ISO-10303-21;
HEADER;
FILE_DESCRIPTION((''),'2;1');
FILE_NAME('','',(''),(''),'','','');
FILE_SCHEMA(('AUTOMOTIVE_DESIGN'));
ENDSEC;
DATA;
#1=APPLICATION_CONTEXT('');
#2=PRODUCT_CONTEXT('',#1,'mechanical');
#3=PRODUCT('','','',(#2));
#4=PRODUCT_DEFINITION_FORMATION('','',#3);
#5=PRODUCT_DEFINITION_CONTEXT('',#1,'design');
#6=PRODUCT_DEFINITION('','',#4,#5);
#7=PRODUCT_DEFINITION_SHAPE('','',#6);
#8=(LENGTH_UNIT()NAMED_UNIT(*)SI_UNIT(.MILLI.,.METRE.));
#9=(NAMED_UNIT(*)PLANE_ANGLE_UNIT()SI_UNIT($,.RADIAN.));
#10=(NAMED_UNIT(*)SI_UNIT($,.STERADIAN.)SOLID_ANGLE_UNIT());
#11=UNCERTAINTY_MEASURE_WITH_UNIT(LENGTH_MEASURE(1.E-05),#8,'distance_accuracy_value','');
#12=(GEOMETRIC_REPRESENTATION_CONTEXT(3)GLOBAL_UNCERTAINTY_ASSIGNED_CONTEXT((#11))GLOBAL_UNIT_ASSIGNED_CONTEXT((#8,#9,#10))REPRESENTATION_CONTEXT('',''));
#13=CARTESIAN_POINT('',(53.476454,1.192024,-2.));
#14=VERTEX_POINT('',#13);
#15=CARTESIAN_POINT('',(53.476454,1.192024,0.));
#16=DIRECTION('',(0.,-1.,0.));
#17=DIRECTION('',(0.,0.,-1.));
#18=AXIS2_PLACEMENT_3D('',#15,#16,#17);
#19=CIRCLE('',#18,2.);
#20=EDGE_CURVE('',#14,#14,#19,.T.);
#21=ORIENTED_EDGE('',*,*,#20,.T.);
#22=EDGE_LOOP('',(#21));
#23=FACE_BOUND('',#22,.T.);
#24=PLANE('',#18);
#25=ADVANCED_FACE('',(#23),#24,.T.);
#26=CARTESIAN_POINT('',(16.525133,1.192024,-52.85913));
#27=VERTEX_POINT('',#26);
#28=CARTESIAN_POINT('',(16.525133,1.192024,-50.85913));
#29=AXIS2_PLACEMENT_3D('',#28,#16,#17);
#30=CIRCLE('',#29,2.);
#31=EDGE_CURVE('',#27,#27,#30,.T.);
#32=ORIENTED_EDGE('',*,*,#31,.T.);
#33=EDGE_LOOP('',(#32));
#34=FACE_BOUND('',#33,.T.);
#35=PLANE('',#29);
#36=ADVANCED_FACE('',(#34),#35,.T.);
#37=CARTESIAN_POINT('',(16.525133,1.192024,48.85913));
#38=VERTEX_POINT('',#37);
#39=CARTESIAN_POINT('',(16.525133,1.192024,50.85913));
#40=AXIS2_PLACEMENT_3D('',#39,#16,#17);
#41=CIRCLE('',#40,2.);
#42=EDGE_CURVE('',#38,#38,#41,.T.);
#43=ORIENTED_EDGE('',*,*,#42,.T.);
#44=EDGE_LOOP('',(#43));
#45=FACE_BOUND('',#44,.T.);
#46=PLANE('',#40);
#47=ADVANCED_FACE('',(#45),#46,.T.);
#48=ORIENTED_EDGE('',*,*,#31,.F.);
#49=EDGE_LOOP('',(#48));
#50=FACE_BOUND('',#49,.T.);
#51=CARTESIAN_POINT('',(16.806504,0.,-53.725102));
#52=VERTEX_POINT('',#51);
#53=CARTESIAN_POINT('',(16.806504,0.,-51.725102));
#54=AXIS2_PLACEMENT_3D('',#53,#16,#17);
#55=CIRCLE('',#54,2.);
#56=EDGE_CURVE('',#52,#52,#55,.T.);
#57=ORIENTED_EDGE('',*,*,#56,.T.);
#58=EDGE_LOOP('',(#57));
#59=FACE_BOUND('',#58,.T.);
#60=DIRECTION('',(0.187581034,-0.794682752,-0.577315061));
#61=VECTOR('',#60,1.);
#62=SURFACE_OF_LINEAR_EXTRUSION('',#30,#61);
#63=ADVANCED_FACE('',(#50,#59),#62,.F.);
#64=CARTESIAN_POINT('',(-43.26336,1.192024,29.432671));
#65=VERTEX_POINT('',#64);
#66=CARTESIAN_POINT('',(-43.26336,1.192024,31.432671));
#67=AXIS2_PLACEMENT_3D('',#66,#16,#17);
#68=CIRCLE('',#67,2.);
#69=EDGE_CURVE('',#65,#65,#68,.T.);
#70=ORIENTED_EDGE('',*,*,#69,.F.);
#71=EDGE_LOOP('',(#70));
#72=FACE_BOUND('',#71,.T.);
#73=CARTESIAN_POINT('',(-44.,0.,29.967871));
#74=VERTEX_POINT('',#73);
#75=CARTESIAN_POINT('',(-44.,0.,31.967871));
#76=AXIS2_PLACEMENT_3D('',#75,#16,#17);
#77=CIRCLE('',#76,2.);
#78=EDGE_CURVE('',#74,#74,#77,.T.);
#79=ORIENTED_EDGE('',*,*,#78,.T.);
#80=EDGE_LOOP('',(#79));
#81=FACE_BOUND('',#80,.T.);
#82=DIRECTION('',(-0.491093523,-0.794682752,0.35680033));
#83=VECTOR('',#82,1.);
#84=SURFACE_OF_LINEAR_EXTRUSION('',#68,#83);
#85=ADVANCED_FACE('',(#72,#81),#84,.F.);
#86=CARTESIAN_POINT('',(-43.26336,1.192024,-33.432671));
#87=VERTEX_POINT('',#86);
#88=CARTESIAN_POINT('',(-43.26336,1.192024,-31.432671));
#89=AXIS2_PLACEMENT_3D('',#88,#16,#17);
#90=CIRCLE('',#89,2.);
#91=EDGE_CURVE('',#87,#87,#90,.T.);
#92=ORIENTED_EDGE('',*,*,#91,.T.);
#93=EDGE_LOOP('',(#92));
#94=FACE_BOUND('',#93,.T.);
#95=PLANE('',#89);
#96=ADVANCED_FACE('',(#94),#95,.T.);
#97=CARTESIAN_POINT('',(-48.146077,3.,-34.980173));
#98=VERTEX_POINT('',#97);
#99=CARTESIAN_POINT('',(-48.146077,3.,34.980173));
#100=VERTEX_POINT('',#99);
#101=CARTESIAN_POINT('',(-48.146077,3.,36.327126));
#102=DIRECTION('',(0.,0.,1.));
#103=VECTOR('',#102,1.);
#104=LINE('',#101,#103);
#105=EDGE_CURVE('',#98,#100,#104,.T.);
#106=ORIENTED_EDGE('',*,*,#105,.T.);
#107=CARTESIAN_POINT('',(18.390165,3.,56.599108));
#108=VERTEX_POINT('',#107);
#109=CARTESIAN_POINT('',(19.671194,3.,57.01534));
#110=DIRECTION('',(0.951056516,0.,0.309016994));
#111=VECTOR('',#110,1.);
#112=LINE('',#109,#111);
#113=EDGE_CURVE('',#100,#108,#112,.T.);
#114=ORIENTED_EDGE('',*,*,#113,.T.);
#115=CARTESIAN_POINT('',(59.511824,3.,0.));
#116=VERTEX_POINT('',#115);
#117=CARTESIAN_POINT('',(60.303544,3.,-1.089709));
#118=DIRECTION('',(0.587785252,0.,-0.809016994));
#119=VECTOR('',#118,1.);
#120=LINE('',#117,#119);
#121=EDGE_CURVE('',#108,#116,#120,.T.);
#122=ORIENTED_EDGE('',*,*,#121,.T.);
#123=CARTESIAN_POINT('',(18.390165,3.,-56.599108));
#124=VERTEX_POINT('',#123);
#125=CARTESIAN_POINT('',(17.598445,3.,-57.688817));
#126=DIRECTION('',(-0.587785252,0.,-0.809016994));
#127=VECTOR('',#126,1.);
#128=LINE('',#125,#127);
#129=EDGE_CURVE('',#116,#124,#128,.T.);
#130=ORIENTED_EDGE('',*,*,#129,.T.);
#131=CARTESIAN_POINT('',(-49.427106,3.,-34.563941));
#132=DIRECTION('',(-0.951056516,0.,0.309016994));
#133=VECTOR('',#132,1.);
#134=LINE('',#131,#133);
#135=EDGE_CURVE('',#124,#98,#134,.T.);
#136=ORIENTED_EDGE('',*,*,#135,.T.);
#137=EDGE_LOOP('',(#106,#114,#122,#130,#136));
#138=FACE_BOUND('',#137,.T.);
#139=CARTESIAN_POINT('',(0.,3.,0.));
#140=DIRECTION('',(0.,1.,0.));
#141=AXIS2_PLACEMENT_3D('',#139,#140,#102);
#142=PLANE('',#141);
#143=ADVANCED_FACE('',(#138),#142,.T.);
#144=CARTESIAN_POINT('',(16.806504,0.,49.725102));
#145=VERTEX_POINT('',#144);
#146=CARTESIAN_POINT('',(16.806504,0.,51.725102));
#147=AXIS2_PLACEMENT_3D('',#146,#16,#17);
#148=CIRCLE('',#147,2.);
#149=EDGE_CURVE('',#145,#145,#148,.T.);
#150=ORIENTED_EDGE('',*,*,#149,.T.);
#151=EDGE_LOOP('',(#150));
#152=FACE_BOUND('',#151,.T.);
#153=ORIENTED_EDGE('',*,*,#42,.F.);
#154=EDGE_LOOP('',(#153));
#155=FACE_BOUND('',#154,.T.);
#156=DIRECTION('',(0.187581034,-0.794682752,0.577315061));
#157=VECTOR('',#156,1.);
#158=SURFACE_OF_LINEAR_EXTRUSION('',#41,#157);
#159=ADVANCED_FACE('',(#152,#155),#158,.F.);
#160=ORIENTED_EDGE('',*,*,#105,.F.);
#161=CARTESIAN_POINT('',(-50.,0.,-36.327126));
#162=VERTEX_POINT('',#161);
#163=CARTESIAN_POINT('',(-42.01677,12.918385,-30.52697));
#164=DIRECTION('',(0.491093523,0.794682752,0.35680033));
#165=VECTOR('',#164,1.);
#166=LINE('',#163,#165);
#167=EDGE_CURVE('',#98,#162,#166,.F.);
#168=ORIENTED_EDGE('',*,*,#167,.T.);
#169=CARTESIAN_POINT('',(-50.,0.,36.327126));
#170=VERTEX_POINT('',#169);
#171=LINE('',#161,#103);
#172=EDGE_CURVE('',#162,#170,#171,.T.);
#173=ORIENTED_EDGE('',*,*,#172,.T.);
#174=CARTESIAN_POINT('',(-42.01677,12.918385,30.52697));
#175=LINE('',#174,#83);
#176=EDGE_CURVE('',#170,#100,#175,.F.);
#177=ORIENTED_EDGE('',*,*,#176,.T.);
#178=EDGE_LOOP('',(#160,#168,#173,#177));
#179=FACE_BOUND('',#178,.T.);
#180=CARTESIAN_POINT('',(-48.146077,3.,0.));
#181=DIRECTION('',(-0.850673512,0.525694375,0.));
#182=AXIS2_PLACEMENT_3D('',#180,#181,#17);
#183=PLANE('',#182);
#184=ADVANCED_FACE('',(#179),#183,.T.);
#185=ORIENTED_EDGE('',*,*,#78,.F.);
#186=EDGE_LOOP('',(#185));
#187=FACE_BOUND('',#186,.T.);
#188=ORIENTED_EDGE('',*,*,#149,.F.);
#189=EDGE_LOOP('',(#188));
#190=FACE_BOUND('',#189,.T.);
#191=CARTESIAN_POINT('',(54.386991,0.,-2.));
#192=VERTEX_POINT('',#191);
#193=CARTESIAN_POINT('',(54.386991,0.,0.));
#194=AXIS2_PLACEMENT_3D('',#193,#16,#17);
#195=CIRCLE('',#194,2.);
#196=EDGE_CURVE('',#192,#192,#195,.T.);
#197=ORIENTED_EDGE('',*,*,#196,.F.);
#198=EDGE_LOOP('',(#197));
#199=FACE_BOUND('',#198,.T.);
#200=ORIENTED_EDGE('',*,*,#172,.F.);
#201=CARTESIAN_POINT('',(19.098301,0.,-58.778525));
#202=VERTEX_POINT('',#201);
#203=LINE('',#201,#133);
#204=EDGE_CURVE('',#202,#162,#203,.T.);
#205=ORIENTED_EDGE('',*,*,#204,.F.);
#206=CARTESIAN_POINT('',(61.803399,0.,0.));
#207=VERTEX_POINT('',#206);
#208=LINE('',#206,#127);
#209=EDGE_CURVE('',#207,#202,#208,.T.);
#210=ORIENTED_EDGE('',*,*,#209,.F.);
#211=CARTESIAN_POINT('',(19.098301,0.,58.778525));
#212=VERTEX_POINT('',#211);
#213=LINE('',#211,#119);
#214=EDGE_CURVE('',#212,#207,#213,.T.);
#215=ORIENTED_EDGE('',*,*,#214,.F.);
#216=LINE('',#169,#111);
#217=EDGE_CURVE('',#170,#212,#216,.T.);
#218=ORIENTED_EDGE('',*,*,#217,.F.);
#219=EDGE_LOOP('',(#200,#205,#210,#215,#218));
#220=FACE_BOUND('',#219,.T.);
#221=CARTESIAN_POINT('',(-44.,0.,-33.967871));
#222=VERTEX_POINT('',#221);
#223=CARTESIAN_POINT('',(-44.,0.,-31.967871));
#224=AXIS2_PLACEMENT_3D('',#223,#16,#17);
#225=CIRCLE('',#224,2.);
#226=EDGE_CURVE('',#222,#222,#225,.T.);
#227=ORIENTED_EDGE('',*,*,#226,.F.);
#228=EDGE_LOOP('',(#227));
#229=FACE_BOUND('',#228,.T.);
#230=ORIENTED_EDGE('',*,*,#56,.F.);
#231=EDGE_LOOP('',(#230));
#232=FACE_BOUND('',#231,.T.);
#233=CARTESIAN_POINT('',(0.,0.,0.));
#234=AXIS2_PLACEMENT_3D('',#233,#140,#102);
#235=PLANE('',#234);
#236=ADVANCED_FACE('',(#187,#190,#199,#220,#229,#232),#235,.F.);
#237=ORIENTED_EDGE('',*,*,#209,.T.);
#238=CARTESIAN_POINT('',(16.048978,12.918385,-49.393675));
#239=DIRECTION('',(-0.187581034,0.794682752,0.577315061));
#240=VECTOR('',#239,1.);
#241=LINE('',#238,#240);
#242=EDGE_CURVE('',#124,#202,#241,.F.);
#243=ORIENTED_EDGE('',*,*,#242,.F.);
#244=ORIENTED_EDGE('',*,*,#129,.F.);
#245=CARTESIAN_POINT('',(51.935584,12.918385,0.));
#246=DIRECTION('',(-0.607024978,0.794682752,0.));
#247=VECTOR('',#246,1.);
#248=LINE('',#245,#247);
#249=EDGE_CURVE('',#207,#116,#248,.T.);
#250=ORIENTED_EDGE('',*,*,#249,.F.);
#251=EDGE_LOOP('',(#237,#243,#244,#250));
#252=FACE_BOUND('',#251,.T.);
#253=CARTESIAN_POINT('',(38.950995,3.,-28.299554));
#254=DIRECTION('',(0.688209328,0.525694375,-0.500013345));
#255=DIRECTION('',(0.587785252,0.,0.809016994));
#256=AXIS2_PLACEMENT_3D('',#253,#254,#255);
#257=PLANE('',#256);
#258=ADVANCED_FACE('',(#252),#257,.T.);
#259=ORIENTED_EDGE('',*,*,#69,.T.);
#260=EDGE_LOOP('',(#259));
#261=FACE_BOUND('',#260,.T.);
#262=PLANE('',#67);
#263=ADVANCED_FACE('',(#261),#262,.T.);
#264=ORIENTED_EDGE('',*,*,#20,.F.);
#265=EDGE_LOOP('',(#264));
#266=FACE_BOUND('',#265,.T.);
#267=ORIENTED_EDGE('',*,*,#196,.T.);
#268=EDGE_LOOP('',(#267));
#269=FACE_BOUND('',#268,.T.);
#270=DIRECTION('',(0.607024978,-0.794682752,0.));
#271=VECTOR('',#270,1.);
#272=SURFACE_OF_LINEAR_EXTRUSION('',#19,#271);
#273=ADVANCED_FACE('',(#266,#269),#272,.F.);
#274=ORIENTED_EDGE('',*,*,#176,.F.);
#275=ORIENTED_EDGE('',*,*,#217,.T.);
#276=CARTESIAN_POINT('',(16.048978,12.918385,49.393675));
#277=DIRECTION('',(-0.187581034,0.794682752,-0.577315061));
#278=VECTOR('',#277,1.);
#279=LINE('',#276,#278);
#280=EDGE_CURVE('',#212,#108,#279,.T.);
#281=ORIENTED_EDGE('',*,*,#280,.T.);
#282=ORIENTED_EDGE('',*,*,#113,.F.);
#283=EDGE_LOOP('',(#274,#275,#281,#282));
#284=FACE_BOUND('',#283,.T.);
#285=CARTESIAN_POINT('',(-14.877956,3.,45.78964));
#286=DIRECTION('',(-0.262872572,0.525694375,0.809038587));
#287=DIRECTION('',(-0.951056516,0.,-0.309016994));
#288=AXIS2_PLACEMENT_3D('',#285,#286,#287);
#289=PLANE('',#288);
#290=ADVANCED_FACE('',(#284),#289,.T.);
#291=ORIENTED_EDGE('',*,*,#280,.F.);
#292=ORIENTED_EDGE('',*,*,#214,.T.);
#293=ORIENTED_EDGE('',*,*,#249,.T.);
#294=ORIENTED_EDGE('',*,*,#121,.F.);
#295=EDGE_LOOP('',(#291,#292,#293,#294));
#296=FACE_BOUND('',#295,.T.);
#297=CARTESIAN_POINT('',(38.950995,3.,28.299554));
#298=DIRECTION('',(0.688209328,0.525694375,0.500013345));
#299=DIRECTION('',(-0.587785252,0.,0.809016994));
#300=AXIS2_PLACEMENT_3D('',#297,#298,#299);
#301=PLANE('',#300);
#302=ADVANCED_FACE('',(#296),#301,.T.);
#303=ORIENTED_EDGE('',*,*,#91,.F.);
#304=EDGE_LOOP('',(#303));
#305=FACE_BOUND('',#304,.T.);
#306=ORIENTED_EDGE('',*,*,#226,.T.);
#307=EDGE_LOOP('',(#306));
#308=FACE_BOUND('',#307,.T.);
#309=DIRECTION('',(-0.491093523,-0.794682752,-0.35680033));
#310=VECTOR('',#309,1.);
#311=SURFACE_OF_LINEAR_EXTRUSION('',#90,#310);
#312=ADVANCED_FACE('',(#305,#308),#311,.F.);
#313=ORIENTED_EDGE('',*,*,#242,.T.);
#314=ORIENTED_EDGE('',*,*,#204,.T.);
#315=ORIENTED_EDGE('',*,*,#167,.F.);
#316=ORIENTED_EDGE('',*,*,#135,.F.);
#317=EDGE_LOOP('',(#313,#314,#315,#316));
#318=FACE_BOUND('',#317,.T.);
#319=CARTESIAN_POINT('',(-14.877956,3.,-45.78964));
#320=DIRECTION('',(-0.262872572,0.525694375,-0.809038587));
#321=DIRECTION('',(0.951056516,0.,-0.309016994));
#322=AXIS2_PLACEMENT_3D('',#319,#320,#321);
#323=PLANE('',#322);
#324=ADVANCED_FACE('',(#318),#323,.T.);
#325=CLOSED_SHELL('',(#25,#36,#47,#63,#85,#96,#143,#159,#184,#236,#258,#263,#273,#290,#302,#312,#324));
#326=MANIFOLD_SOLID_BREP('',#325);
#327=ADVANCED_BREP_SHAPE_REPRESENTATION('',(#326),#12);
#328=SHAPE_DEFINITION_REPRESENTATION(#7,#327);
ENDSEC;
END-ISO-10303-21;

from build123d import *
from OCP.BRepFilletAPI import BRepFilletAPI_MakeChamfer

# Parameters (mm, degrees)
BOSS_EXTRUDE1_DEPTH = 3
CHAMFER1_SIZE       = 3
CHAMFER1_SIZE_2     = 1.853922924
SKETCH7_R           = 2
CUT_EXTRUDE6_DEPTH  = 1.5
SKETCH9_R           = 2
CUT_EXTRUDE7_DEPTH  = 1.5
SKETCH12_R          = 2
CUT_EXTRUDE8_DEPTH  = 1.5
SKETCH11_R          = 2
CUT_EXTRUDE9_DEPTH  = 1.5
SKETCH10_R          = 2
CUT_EXTRUDE10_DEPTH = 1.5


with BuildPart() as part:
    # Sketch1 → Boss-Extrude1 (new body)
    with BuildSketch(Plane(origin=(0, 0, 0), x_dir=(1, 0, 0), z_dir=(0, 1, 0))):
        Polygon((61.803398875, 0), (19.098300563, 58.778525229), (-50, 36.3271264), (-50, -36.3271264), (19.098300563, -58.778525229), align=None)
    extrude(amount=BOSS_EXTRUDE1_DEPTH)

    # Chamfer1
    chamfer1_edges_1 = [part.edges().sort_by_distance(p)[0] for p in [
        (-50, 3, 0),
    ]]
    chamfer1_side_1 = [part.faces().sort_by_distance(p)[0] for p in [
        (-50, 2.962921542, 0),
    ]]
    chamfer1_edges_2 = [part.edges().sort_by_distance(p)[0] for p in [
        (-15.450849719, 3, -47.552825815),
    ]]
    chamfer1_side_2 = [part.faces().sort_by_distance(p)[0] for p in [
        (-15.450849719, 2.962921542, -47.552825815),
    ]]
    chamfer1_edges_3 = [part.edges().sort_by_distance(p)[0] for p in [
        (40.450849719, 3, -29.389262615),
    ]]
    chamfer1_side_3 = [part.faces().sort_by_distance(p)[0] for p in [
        (40.450849719, 2.962921542, -29.389262615),
    ]]
    chamfer1_edges_4 = [part.edges().sort_by_distance(p)[0] for p in [
        (40.450849719, 3, 29.389262615),
    ]]
    chamfer1_side_4 = [part.faces().sort_by_distance(p)[0] for p in [
        (40.450849719, 2.962921542, 29.389262615),
    ]]
    chamfer1_edges_5 = [part.edges().sort_by_distance(p)[0] for p in [
        (-15.450849719, 3, 47.552825815),
    ]]
    chamfer1_side_5 = [part.faces().sort_by_distance(p)[0] for p in [
        (-15.450849719, 2.962921542, 47.552825815),
    ]]
    chamfer1 = BRepFilletAPI_MakeChamfer(part.part.solid().wrapped)
    for e in chamfer1_edges_1:
        chamfer1.Add(CHAMFER1_SIZE - 0.0001, CHAMFER1_SIZE_2 - 0.0001, e.wrapped, chamfer1_side_1[0].wrapped)
    for e in chamfer1_edges_2:
        chamfer1.Add(CHAMFER1_SIZE - 0.0001, CHAMFER1_SIZE_2 - 0.0001, e.wrapped, chamfer1_side_2[0].wrapped)
    for e in chamfer1_edges_3:
        chamfer1.Add(CHAMFER1_SIZE - 0.0001, CHAMFER1_SIZE_2 - 0.0001, e.wrapped, chamfer1_side_3[0].wrapped)
    for e in chamfer1_edges_4:
        chamfer1.Add(CHAMFER1_SIZE - 0.0001, CHAMFER1_SIZE_2 - 0.0001, e.wrapped, chamfer1_side_4[0].wrapped)
    for e in chamfer1_edges_5:
        chamfer1.Add(CHAMFER1_SIZE - 0.0001, CHAMFER1_SIZE_2 - 0.0001, e.wrapped, chamfer1_side_5[0].wrapped)
    add(Compound.cast(chamfer1.Shape()), mode=Mode.REPLACE)  # a hair under: the kernel refuses the full size

    # Sketch7 → Cut-Extrude6 (cut, along a direction that is not the sketch's normal)
    with BuildSketch(Plane.XZ):
        with Locations((16.806504495, -51.725102202)):
            Circle(SKETCH7_R)
    extrude(amount=-CUT_EXTRUDE6_DEPTH, dir=(0.18758103429764753, -0.7946827516361076, -0.5773150611441635), mode=Mode.SUBTRACT)

    # Sketch9 → Cut-Extrude7 (cut, along a direction that is not the sketch's normal)
    with BuildSketch(Plane.XZ):
        with Locations((-44, -31.967871232)):
            Circle(SKETCH9_R)
    extrude(amount=-CUT_EXTRUDE7_DEPTH, dir=(-0.4910935234360889, -0.7946827516361092, -0.356800330004317), mode=Mode.SUBTRACT)

    # Sketch12 → Cut-Extrude8 (cut, along a direction that is not the sketch's normal)
    with BuildSketch(Plane.XZ):
        with Locations((-44, 31.967871232)):
            Circle(SKETCH12_R)
    extrude(amount=-CUT_EXTRUDE8_DEPTH, dir=(-0.4910935234360893, -0.7946827516361098, 0.35680033000431516), mode=Mode.SUBTRACT)

    # Sketch11 → Cut-Extrude9 (cut, along a direction that is not the sketch's normal)
    with BuildSketch(Plane.XZ):
        with Locations((16.806504495, 51.725102202)):
            Circle(SKETCH11_R)
    extrude(amount=-CUT_EXTRUDE9_DEPTH, dir=(0.18758103429764547, -0.7946827516361094, 0.577315061144162), mode=Mode.SUBTRACT)

    # Sketch10 → Cut-Extrude10 (cut, along a direction that is not the sketch's normal)
    with BuildSketch(Plane.XZ):
        with Locations((54.38699101, 0)):
            Circle(SKETCH10_R)
    extrude(amount=-CUT_EXTRUDE10_DEPTH, dir=(0.607024978276895, -0.7946827516361074, -2.948455894095108e-15), mode=Mode.SUBTRACT)


solid = part.part
